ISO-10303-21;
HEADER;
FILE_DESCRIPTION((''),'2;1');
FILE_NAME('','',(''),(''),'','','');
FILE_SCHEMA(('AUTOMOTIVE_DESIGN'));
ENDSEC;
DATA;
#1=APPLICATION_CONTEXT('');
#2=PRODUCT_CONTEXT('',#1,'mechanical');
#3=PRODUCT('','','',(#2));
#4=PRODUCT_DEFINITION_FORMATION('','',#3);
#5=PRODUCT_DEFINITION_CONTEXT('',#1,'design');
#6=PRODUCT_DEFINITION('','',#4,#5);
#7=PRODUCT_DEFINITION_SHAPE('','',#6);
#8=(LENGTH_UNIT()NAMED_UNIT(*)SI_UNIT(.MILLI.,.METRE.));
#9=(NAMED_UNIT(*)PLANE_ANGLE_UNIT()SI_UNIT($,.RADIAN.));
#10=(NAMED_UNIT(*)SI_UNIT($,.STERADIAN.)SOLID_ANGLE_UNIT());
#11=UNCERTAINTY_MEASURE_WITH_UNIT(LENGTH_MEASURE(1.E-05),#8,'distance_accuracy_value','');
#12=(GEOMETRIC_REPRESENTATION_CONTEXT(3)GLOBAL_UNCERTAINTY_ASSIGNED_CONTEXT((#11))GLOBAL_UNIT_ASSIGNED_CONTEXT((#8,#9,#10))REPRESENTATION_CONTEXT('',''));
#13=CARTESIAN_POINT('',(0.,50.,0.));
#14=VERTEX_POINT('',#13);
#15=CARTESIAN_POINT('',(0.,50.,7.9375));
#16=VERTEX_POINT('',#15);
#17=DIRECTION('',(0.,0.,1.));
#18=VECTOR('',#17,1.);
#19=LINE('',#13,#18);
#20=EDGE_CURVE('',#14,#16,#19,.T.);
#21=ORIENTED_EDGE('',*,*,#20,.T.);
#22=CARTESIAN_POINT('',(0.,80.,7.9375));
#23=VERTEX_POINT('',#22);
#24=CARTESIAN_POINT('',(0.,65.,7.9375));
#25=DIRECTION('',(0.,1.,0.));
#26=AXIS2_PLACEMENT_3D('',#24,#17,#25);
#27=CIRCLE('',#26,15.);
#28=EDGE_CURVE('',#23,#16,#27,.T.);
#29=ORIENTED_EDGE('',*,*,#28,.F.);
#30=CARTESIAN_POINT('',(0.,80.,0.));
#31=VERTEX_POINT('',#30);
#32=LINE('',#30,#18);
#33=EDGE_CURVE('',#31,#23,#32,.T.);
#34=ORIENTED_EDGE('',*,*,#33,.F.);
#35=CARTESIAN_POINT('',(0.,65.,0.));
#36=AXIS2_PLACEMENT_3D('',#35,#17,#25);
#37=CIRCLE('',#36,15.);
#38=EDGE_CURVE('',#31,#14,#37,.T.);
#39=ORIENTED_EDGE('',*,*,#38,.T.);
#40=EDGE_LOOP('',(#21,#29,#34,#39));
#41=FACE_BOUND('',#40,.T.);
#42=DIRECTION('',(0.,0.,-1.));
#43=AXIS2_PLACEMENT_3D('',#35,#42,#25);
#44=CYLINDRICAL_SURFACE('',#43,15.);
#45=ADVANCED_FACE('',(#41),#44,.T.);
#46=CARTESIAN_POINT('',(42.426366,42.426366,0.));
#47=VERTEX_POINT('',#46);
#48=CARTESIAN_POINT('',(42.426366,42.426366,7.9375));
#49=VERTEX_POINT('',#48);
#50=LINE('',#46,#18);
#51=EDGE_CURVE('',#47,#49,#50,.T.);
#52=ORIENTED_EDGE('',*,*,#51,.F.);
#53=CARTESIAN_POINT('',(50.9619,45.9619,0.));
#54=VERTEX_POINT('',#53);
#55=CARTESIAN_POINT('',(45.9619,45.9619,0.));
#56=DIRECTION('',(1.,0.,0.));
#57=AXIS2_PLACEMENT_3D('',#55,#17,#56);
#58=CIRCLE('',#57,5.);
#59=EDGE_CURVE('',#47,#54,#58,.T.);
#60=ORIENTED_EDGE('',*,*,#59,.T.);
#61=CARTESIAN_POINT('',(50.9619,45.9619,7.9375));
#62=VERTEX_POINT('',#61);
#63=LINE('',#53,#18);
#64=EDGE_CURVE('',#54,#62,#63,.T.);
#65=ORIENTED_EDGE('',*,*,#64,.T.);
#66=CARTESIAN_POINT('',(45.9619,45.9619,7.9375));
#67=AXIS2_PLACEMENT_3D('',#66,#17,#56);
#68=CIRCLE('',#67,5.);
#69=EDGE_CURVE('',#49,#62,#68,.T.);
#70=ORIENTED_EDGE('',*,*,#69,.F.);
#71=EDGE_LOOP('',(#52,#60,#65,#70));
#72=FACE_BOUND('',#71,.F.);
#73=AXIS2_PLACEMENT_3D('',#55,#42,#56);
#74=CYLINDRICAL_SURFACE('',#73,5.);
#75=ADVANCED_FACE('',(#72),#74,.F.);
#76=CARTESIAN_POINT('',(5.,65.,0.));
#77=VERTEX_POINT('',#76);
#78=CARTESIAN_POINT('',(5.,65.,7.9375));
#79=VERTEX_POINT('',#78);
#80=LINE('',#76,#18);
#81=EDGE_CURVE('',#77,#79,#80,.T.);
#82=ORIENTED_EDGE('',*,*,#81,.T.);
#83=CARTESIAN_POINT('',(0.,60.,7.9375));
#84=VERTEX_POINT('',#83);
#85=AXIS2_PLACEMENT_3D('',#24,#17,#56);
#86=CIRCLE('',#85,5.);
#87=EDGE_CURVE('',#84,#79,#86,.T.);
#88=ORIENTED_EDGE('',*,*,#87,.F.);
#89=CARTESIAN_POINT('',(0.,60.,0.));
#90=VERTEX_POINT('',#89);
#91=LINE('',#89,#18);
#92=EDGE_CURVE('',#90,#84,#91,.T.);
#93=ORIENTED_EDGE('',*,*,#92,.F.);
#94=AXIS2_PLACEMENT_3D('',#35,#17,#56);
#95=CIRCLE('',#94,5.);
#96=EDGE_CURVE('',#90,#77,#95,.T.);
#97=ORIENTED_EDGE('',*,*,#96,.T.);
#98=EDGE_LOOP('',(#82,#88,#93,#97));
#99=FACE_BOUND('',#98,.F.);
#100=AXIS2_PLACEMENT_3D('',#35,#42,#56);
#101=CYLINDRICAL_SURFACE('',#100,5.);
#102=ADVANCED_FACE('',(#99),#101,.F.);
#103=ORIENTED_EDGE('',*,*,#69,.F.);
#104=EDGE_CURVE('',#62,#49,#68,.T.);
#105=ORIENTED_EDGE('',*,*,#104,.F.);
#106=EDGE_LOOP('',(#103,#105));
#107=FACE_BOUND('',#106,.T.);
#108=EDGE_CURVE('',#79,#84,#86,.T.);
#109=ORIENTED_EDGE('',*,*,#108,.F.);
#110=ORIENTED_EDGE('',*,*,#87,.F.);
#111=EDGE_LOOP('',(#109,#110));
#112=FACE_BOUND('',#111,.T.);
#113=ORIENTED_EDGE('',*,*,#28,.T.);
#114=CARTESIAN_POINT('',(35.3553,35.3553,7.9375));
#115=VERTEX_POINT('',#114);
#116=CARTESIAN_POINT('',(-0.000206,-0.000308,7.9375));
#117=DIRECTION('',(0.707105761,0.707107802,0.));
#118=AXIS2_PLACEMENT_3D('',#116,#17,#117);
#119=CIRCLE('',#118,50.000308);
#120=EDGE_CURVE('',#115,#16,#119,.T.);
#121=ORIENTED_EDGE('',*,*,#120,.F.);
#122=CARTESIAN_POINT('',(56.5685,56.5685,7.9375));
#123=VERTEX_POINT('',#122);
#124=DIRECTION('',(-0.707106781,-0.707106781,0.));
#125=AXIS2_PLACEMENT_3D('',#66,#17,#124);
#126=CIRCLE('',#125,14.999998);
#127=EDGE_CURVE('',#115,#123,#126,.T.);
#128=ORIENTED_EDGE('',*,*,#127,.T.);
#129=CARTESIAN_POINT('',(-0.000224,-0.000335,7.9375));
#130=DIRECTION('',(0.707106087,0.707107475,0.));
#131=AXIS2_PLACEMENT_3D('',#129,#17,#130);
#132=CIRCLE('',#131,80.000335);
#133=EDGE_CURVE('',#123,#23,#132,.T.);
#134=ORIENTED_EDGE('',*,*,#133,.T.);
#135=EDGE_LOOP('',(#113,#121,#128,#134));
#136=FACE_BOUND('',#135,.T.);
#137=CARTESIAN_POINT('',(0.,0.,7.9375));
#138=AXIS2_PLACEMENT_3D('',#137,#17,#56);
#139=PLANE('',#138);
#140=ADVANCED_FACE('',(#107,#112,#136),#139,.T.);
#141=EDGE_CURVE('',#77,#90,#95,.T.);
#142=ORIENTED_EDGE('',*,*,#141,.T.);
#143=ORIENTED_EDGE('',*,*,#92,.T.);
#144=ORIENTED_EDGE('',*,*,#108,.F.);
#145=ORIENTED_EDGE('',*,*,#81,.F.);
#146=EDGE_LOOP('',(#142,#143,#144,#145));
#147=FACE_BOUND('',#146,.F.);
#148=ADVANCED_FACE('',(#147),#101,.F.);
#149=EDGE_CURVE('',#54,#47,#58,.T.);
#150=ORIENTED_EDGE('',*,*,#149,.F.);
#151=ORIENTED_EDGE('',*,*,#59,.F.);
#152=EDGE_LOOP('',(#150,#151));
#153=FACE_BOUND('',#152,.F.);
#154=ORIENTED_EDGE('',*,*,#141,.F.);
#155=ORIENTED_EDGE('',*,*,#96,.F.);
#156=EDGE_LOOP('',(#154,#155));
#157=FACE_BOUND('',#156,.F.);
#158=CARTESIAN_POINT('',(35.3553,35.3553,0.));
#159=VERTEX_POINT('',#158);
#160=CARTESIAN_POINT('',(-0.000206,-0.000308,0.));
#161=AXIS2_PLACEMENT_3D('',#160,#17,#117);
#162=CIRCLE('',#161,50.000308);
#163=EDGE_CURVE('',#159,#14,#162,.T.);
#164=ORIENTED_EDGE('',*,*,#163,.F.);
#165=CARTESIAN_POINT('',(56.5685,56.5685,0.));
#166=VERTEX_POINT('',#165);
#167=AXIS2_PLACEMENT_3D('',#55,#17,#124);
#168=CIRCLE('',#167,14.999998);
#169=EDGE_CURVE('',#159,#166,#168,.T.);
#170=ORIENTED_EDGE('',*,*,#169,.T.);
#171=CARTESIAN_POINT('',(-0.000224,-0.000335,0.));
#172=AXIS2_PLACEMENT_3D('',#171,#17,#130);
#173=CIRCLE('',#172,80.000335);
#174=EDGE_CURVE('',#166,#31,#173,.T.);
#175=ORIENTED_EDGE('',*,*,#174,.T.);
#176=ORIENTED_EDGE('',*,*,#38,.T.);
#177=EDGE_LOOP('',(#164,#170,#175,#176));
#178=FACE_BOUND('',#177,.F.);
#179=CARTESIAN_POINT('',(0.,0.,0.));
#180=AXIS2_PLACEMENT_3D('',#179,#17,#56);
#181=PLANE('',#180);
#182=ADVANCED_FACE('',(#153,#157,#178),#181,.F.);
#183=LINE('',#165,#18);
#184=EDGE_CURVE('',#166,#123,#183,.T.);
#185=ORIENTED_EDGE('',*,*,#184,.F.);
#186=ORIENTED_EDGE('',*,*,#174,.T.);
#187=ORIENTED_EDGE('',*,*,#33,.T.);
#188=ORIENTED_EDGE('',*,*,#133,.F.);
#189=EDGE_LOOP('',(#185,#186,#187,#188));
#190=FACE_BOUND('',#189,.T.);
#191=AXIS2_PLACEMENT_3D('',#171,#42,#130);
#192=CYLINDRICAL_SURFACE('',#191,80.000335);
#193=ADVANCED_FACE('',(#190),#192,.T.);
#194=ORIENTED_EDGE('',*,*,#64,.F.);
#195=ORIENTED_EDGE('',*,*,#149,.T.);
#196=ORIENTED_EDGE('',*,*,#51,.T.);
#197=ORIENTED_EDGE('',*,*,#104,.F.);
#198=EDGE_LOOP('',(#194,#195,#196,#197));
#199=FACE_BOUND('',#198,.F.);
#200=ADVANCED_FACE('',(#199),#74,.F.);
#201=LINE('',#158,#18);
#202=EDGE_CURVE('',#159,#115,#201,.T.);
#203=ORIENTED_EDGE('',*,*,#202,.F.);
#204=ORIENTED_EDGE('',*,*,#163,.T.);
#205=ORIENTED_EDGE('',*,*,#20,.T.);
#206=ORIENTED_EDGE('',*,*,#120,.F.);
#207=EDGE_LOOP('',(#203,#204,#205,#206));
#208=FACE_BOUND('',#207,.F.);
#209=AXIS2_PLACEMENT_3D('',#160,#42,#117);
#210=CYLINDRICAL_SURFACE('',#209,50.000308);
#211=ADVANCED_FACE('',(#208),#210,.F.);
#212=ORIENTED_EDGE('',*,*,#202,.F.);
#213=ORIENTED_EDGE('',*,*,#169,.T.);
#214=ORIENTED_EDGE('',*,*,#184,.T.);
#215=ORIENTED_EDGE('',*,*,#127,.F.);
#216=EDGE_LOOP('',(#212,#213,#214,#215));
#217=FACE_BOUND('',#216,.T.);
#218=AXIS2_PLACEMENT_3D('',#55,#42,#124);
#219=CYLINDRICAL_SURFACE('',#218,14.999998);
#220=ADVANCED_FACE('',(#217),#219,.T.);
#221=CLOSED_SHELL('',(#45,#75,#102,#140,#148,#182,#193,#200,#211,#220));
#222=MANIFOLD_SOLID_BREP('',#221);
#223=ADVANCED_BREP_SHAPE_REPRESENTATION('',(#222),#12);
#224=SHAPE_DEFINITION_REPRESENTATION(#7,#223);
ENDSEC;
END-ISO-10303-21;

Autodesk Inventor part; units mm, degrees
ref_plane "YZ Plane" through (0, 0, 0) normal (1, 0, 0) x (0, 1, 0)
ref_plane "XZ Plane" through (0, 0, 0) normal (0, 1, 0) x (-1, 0, 0)
ref_plane "XY Plane" through (0, 0, 0) normal (0, 0, 1) x (1, 0, 0)
sketch "Sketch1" plane through (0, 0, 0) normal (0, 0, 1) x (1, 0, 0)
  arc A0 (45.9619, 45.9619) -> (0, 65) centre (0, 0) ccw construction
  arc A1 (56.5685, 56.5685) -> (0, 80) centre (0, 0) ccw
  arc A2 (35.3553, 35.3553) -> (0, 50) centre (0, 0) ccw
  arc A3 (35.3553, 35.3553) -> (56.5685, 56.5685) centre (45.9619, 45.9619) ccw
  arc A4 (0, 80) -> (0, 50) centre (0, 65) ccw
  line L0 (0, 65) -> (0, 0)
  line L1 (0, 0) -> (45.9619, 45.9619)
  circle A5 centre (0, 65) radius 5
  circle A6 centre (45.9619, 45.9619) radius 5
  dimension "d0" = 45
  dimension "d1" = 50
  dimension "d2" = 80
  dimension "d3" = 10
  dimension "d4" = 10
extrude "Extrusion1" add sketch "Sketch1" along normal blind 7.9375 contours A3 A2 A4 A1
properties part number "Support"
